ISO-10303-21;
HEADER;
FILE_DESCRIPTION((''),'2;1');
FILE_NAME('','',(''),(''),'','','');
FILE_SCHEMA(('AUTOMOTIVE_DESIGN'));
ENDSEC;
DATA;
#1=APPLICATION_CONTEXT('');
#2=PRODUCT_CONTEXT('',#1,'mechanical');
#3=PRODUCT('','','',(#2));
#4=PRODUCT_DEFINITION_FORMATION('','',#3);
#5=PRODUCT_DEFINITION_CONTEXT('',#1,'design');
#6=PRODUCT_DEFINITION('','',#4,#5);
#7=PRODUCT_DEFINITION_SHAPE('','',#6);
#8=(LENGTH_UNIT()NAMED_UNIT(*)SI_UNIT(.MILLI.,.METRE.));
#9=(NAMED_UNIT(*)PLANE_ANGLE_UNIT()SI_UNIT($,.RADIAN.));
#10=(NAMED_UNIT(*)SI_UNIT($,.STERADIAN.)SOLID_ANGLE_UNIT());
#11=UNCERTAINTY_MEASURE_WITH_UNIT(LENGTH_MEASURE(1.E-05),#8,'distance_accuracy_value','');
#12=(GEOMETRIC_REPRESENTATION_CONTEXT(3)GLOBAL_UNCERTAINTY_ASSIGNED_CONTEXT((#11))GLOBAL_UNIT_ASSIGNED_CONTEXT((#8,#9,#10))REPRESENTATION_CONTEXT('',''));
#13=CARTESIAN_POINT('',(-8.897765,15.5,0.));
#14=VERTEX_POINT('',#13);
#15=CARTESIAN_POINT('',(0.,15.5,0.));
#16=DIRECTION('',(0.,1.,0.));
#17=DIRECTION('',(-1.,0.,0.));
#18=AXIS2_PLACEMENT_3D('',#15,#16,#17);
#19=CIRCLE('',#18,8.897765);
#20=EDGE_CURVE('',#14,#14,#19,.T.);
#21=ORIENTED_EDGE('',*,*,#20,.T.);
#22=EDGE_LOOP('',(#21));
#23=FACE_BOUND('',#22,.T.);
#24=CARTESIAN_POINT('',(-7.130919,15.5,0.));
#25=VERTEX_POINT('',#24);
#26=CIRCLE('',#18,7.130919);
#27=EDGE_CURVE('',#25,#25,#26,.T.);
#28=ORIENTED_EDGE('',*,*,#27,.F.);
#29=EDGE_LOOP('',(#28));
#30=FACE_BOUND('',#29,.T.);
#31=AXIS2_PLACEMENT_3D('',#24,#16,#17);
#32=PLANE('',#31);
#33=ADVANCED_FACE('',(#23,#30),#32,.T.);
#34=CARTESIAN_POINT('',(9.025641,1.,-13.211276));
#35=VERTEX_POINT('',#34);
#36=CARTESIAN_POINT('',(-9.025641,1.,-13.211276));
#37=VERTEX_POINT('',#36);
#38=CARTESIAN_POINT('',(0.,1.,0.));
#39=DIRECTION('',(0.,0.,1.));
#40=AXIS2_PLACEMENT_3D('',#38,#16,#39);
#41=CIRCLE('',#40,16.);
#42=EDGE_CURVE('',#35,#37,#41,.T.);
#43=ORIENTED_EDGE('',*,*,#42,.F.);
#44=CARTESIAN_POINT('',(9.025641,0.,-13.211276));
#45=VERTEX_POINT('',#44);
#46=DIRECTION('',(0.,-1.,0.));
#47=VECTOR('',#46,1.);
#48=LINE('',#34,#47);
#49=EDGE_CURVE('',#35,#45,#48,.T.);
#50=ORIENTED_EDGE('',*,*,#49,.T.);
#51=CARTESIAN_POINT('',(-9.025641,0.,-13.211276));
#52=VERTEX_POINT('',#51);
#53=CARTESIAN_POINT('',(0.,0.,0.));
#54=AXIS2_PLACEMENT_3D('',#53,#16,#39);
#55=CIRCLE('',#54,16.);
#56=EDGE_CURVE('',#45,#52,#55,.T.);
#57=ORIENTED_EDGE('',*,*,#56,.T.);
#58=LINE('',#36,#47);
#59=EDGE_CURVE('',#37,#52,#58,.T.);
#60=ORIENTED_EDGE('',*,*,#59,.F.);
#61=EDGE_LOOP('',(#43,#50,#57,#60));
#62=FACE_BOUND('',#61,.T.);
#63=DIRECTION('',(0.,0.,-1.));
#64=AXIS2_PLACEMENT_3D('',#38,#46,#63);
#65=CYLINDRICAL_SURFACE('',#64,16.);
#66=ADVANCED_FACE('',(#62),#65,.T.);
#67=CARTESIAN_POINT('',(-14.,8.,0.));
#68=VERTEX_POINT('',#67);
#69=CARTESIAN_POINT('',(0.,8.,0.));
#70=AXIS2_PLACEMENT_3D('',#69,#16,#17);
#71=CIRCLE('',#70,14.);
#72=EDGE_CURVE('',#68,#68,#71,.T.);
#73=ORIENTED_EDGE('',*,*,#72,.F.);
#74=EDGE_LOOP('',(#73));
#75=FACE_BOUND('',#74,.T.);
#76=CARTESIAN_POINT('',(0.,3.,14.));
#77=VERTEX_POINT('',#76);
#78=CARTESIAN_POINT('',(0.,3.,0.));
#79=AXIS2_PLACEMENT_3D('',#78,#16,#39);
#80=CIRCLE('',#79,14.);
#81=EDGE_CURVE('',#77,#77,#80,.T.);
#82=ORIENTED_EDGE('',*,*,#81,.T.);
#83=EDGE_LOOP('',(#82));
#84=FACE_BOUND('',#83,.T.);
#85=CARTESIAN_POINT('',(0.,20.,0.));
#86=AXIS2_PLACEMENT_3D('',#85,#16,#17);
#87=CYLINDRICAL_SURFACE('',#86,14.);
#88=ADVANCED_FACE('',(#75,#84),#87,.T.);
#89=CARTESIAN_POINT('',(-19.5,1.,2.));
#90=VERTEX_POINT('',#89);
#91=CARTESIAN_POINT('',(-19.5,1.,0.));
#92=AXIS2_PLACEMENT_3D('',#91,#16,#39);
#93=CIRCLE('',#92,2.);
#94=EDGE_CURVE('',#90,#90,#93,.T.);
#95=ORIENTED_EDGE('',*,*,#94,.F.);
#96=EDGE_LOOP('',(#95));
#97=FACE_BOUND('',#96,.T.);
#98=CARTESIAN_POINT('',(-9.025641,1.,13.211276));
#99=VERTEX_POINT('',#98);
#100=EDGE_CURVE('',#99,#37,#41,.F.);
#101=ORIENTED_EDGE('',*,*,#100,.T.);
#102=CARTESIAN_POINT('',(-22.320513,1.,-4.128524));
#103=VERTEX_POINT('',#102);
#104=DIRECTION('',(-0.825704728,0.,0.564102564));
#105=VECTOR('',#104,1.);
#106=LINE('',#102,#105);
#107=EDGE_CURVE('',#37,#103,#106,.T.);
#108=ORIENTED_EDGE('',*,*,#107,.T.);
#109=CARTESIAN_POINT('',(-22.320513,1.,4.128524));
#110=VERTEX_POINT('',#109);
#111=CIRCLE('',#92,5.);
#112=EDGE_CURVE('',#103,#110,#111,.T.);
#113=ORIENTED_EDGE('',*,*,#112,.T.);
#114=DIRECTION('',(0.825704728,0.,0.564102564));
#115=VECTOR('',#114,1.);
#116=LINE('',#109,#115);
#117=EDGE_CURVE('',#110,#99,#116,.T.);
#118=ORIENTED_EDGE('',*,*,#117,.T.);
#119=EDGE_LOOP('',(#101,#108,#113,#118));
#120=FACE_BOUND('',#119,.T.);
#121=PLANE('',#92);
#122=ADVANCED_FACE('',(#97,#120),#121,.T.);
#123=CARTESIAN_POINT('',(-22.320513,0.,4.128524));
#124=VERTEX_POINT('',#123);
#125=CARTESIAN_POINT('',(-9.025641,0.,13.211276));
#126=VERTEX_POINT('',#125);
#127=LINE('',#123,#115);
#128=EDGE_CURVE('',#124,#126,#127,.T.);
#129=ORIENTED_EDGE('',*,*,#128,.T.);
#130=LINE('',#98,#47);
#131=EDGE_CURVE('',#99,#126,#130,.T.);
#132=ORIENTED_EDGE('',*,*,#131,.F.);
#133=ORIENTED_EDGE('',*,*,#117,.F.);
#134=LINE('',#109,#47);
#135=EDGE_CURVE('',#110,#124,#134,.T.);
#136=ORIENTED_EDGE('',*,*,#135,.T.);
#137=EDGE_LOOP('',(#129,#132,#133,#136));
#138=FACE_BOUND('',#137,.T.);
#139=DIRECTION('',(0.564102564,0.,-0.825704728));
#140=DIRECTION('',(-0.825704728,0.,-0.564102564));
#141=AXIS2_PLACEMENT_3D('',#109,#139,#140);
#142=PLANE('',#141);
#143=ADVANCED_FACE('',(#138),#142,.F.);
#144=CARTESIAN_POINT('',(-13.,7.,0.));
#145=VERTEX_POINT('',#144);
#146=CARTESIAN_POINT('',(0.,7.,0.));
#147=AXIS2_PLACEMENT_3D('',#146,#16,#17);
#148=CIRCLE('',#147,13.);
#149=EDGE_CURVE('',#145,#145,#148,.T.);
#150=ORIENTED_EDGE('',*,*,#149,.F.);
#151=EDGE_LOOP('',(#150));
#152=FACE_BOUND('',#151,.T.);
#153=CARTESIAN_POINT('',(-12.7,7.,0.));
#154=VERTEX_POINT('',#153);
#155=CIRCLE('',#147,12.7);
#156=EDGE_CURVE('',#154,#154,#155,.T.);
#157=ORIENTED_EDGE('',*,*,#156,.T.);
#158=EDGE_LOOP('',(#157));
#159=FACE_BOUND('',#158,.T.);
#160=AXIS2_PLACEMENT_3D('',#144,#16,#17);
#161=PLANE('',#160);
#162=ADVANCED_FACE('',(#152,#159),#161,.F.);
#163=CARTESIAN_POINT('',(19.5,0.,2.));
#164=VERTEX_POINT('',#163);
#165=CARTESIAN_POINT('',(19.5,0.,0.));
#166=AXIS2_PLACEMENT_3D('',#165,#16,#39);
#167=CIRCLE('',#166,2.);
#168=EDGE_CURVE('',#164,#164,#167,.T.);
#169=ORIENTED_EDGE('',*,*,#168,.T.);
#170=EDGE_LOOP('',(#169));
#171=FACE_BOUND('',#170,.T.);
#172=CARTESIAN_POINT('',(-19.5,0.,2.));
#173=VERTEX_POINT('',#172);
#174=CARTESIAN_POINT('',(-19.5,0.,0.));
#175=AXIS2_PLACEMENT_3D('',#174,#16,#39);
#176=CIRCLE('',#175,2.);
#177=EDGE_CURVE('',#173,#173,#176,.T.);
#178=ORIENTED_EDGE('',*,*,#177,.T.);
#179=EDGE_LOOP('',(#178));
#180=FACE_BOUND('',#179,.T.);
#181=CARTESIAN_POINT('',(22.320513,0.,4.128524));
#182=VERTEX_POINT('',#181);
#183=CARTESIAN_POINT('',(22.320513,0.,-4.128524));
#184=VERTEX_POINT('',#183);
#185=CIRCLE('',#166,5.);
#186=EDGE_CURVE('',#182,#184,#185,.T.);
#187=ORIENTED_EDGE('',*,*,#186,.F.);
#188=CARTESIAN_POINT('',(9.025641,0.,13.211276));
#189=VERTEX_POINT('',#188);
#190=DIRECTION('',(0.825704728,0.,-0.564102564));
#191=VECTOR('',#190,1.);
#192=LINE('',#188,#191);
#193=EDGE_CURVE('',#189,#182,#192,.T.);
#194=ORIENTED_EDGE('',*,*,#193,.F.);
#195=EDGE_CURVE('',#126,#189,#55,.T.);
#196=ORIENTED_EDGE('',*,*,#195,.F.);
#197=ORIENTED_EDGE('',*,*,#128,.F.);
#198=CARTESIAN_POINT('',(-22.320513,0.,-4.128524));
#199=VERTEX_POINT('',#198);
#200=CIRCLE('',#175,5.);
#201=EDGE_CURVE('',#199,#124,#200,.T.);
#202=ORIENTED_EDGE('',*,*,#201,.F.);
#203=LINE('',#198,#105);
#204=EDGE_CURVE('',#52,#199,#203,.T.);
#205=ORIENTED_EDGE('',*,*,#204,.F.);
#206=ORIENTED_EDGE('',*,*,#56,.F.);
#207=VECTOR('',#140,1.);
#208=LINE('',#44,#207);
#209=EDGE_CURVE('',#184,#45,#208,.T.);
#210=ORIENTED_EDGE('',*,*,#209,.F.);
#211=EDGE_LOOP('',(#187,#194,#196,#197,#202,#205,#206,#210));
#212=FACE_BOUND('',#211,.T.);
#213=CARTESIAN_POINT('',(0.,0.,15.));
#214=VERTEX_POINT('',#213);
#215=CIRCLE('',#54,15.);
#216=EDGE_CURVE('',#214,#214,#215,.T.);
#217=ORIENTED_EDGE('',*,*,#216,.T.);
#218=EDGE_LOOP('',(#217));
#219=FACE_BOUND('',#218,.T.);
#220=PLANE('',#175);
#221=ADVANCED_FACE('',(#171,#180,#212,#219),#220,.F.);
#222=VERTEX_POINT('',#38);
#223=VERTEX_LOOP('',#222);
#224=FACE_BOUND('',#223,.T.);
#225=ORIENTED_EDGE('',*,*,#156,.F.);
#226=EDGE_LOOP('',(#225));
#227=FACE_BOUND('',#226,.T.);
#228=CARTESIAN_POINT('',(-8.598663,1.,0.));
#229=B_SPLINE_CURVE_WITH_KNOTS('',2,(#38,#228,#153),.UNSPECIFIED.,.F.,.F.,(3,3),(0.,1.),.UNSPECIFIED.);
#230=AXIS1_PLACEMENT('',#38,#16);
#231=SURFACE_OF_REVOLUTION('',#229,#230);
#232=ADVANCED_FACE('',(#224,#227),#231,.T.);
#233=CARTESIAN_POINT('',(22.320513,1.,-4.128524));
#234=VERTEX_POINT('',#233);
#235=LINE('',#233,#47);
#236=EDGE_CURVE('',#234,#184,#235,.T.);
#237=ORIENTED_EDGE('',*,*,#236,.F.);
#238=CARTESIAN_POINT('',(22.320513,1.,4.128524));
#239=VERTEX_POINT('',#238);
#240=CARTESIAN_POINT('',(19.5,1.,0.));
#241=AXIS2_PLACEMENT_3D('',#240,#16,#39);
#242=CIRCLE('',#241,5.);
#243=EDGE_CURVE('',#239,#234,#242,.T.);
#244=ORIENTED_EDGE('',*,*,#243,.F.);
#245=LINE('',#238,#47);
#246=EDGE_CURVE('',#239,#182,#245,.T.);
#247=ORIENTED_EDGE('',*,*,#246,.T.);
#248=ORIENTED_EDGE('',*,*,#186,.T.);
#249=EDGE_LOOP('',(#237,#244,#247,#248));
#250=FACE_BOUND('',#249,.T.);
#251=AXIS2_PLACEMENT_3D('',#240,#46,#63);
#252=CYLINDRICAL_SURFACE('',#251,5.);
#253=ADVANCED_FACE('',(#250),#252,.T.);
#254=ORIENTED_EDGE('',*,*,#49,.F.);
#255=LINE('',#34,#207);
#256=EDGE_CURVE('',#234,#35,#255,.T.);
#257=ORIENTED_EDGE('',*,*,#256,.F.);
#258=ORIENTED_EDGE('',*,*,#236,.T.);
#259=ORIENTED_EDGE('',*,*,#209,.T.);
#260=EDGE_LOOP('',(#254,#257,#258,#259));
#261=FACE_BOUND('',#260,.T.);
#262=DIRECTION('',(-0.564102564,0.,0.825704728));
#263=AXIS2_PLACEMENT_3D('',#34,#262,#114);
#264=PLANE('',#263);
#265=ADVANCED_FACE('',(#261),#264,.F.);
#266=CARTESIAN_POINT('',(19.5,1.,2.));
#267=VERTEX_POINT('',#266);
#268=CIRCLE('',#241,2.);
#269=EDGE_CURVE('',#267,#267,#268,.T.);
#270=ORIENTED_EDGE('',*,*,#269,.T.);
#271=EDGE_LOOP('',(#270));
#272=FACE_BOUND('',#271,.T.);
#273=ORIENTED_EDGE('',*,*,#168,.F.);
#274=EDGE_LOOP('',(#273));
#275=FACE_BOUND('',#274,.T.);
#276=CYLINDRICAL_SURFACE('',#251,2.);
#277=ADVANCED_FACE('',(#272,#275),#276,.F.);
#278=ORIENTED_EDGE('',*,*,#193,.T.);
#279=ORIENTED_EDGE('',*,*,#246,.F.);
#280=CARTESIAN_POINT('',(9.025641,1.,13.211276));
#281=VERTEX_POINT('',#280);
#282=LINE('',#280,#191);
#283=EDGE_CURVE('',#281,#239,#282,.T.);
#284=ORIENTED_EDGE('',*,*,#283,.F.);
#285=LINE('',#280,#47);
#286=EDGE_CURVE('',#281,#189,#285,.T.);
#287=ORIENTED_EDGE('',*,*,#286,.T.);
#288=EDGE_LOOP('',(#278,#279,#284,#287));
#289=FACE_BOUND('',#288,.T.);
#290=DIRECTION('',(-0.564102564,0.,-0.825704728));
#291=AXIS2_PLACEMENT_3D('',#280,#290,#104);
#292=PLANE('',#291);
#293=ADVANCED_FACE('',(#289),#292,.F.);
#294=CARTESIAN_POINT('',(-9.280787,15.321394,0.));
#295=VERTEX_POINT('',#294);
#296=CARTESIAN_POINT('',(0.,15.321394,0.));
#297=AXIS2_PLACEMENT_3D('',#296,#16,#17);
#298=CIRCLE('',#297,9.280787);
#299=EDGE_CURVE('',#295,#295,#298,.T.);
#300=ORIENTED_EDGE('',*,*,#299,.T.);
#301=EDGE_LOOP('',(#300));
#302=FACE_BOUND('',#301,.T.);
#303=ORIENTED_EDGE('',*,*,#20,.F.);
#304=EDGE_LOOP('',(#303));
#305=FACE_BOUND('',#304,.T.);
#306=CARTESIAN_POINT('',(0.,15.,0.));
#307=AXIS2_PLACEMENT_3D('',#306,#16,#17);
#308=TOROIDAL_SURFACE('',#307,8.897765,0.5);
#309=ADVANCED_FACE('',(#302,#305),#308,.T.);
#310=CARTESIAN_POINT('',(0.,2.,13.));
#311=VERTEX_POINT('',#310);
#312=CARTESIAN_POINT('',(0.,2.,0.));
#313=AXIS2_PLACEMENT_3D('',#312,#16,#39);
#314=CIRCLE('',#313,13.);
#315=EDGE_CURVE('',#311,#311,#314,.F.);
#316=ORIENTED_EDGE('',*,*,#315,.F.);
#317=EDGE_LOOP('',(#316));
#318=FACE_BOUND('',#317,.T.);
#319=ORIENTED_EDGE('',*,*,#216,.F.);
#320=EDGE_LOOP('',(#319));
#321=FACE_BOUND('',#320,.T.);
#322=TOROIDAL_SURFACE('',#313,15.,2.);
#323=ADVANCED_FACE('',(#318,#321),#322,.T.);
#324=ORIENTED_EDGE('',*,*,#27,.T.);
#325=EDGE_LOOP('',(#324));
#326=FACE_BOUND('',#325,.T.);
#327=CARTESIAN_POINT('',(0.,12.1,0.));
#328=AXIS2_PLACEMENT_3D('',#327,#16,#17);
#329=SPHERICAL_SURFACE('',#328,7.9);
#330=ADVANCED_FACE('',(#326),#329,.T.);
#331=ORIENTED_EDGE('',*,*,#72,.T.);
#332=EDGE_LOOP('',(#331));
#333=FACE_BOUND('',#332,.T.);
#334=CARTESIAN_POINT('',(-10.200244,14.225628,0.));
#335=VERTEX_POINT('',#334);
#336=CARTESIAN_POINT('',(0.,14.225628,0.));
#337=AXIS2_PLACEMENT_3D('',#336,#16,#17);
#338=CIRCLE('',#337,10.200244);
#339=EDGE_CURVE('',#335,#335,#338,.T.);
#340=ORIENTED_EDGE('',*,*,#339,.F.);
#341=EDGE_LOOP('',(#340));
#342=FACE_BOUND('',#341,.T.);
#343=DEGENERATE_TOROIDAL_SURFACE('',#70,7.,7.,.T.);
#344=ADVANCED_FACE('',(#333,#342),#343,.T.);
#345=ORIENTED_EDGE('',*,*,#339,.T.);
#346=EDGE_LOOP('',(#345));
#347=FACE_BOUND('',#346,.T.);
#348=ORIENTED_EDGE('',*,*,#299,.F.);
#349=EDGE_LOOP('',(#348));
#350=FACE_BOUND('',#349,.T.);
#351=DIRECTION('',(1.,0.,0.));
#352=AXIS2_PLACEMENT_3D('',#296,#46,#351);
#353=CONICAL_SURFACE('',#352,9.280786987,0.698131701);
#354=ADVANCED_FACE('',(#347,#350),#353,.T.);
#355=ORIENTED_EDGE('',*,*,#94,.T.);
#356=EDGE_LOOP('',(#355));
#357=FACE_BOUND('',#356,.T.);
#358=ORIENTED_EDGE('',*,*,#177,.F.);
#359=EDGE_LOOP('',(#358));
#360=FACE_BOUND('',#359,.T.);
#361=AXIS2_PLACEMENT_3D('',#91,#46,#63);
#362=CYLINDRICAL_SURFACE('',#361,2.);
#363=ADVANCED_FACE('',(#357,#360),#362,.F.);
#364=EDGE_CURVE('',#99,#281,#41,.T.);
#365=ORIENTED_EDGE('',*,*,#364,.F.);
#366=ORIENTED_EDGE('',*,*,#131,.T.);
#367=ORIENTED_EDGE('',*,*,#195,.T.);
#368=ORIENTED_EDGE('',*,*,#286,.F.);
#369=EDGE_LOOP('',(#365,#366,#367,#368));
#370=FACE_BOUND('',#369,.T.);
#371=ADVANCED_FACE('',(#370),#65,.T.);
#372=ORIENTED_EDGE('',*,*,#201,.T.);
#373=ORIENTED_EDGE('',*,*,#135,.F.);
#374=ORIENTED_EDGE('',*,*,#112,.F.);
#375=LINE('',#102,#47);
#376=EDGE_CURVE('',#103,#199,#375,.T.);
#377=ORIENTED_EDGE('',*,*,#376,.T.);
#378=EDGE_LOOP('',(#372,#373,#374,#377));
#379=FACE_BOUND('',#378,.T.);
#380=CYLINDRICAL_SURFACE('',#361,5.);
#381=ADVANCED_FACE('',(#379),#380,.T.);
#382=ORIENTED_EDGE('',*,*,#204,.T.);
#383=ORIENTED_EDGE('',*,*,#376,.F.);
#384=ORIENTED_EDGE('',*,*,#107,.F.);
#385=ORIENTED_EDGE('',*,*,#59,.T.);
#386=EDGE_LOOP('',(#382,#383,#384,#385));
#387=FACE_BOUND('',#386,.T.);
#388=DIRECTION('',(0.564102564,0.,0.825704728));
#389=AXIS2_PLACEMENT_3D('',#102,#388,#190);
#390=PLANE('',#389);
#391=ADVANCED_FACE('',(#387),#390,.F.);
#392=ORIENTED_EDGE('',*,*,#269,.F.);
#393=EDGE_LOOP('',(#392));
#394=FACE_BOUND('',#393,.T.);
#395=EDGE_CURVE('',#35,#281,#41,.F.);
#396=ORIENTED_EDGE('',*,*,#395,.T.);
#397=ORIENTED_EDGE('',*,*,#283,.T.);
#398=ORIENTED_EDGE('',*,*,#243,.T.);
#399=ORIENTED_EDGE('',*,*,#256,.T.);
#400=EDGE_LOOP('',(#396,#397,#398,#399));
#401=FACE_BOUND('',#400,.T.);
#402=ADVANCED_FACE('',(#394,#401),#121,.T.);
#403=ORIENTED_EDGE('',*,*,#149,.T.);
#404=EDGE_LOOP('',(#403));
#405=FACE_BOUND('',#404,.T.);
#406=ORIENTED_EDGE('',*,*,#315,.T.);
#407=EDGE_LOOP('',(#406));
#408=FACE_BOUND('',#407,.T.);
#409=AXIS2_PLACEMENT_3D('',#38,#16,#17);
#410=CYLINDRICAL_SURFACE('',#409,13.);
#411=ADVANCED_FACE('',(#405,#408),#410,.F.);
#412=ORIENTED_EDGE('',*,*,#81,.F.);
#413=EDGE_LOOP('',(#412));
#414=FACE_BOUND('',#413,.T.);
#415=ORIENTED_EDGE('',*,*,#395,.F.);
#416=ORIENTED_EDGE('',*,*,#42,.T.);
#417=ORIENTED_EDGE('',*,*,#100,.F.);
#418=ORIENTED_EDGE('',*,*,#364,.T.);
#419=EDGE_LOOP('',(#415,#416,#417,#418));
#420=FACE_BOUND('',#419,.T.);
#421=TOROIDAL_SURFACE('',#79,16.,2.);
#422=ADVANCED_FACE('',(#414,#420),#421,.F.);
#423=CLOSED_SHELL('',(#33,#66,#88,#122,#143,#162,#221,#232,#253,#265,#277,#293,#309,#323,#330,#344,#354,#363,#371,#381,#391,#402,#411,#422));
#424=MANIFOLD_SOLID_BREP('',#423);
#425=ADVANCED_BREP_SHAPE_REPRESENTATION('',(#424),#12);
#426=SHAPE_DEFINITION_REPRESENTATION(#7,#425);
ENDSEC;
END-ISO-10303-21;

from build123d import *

# Parameters (mm, degrees)
SKETCH_1_R      = 2
EXTRUDE_1_DEPTH = 1
FILLET_1_R      = 2
FILLET_3_R      = 2


with BuildPart() as part:
    # 草圖1 → 填料-伸長1 (new body)
    with BuildSketch(Plane(origin=(0, 0, 0), x_dir=(1, 0, 0), z_dir=(0, 1, 0))):
        with BuildLine():
            Line((-22.320512821, 4.128523638), (-9.025641026, 13.211275642))
            ThreePointArc((-9.025641026, 13.211275642), (0, 16), (9.025641026, 13.211275642))
            Line((9.025641026, 13.211275642), (22.320512821, 4.128523638))
            ThreePointArc((22.320512821, 4.128523638), (24.5, 0), (22.320512821, -4.128523638))
            Line((22.320512821, -4.128523638), (9.025641026, -13.211275642))
            ThreePointArc((9.025641026, -13.211275642), (0, -16), (-9.025641026, -13.211275642))
            Line((-9.025641026, -13.211275642), (-22.320512821, -4.128523638))
            ThreePointArc((-22.320512821, -4.128523638), (-24.5, 0), (-22.320512821, 4.128523638))
        make_face()
        with Locations(Location((19.5, 0, 0), (0, 0, 270))):
            Circle(SKETCH_1_R, mode=Mode.SUBTRACT)
        with Locations(Location((-19.5, 0, 0), (0, 0, 270))):
            Circle(SKETCH_1_R, mode=Mode.SUBTRACT)
    extrude(amount=EXTRUDE_1_DEPTH)

    # 草圖2 → 旋轉1 (revolve)
    with BuildSketch(Plane.XY):
        with BuildLine():
            Line((-14, 1), (-14, 8))
            ThreePointArc((-14, 8), (-12.975019189, 11.646799376), (-10.200244089, 14.2256275))
            Line((-10.200244089, 14.2256275), (-9.280786987, 15.321393805))
            ThreePointArc((-9.280786987, 15.321393805), (-9.109073896, 15.453153894), (-8.897764765, 15.5))
            Line((-8.897764765, 15.5), (-7.130918594, 15.5))
            ThreePointArc((-7.130918594, 15.5), (-4.216040797, 18.780943047), (0, 20))
            Line((0, 20), (0, 1))
            Line((0, 1), (-14, 1))
        make_face()
    revolve(axis=Axis((0, 20, 0), (0, -1, 0)))

    # 圓角1
    fillet_1_edges = [part.edges().sort_by_distance(p)[0] for p in [
        (14, 1, 0),
    ]]
    fillet(fillet_1_edges, radius=FILLET_1_R - 0.0001)  # a hair under: the kernel refuses the full size

    # 草圖3 → 除料-旋轉1 (revolve, cut)
    with BuildSketch(Plane.XY):
        with BuildLine():
            Line((0, 0), (-13, 0))
            Line((-13, 0), (-13, 7))
            Line((-13, 7), (-12.7, 7))
            add(Edge.make_bspline(
                [(-12.7, 7), (-8.598662897, 1), (0, 1)],
                knots=[0, 0, 0, 1, 1, 1], degree=2))
            Line((0, 1), (0, 0))
        make_face()
    revolve(axis=Axis((0, 1, 0), (0, -1, 0)), mode=Mode.SUBTRACT)

    # 圓角3
    fillet_3_edges = [part.edges().sort_by_distance(p)[0] for p in [
        (13, 0, 0),
    ]]
    fillet(fillet_3_edges, radius=FILLET_3_R)


solid = part.part
